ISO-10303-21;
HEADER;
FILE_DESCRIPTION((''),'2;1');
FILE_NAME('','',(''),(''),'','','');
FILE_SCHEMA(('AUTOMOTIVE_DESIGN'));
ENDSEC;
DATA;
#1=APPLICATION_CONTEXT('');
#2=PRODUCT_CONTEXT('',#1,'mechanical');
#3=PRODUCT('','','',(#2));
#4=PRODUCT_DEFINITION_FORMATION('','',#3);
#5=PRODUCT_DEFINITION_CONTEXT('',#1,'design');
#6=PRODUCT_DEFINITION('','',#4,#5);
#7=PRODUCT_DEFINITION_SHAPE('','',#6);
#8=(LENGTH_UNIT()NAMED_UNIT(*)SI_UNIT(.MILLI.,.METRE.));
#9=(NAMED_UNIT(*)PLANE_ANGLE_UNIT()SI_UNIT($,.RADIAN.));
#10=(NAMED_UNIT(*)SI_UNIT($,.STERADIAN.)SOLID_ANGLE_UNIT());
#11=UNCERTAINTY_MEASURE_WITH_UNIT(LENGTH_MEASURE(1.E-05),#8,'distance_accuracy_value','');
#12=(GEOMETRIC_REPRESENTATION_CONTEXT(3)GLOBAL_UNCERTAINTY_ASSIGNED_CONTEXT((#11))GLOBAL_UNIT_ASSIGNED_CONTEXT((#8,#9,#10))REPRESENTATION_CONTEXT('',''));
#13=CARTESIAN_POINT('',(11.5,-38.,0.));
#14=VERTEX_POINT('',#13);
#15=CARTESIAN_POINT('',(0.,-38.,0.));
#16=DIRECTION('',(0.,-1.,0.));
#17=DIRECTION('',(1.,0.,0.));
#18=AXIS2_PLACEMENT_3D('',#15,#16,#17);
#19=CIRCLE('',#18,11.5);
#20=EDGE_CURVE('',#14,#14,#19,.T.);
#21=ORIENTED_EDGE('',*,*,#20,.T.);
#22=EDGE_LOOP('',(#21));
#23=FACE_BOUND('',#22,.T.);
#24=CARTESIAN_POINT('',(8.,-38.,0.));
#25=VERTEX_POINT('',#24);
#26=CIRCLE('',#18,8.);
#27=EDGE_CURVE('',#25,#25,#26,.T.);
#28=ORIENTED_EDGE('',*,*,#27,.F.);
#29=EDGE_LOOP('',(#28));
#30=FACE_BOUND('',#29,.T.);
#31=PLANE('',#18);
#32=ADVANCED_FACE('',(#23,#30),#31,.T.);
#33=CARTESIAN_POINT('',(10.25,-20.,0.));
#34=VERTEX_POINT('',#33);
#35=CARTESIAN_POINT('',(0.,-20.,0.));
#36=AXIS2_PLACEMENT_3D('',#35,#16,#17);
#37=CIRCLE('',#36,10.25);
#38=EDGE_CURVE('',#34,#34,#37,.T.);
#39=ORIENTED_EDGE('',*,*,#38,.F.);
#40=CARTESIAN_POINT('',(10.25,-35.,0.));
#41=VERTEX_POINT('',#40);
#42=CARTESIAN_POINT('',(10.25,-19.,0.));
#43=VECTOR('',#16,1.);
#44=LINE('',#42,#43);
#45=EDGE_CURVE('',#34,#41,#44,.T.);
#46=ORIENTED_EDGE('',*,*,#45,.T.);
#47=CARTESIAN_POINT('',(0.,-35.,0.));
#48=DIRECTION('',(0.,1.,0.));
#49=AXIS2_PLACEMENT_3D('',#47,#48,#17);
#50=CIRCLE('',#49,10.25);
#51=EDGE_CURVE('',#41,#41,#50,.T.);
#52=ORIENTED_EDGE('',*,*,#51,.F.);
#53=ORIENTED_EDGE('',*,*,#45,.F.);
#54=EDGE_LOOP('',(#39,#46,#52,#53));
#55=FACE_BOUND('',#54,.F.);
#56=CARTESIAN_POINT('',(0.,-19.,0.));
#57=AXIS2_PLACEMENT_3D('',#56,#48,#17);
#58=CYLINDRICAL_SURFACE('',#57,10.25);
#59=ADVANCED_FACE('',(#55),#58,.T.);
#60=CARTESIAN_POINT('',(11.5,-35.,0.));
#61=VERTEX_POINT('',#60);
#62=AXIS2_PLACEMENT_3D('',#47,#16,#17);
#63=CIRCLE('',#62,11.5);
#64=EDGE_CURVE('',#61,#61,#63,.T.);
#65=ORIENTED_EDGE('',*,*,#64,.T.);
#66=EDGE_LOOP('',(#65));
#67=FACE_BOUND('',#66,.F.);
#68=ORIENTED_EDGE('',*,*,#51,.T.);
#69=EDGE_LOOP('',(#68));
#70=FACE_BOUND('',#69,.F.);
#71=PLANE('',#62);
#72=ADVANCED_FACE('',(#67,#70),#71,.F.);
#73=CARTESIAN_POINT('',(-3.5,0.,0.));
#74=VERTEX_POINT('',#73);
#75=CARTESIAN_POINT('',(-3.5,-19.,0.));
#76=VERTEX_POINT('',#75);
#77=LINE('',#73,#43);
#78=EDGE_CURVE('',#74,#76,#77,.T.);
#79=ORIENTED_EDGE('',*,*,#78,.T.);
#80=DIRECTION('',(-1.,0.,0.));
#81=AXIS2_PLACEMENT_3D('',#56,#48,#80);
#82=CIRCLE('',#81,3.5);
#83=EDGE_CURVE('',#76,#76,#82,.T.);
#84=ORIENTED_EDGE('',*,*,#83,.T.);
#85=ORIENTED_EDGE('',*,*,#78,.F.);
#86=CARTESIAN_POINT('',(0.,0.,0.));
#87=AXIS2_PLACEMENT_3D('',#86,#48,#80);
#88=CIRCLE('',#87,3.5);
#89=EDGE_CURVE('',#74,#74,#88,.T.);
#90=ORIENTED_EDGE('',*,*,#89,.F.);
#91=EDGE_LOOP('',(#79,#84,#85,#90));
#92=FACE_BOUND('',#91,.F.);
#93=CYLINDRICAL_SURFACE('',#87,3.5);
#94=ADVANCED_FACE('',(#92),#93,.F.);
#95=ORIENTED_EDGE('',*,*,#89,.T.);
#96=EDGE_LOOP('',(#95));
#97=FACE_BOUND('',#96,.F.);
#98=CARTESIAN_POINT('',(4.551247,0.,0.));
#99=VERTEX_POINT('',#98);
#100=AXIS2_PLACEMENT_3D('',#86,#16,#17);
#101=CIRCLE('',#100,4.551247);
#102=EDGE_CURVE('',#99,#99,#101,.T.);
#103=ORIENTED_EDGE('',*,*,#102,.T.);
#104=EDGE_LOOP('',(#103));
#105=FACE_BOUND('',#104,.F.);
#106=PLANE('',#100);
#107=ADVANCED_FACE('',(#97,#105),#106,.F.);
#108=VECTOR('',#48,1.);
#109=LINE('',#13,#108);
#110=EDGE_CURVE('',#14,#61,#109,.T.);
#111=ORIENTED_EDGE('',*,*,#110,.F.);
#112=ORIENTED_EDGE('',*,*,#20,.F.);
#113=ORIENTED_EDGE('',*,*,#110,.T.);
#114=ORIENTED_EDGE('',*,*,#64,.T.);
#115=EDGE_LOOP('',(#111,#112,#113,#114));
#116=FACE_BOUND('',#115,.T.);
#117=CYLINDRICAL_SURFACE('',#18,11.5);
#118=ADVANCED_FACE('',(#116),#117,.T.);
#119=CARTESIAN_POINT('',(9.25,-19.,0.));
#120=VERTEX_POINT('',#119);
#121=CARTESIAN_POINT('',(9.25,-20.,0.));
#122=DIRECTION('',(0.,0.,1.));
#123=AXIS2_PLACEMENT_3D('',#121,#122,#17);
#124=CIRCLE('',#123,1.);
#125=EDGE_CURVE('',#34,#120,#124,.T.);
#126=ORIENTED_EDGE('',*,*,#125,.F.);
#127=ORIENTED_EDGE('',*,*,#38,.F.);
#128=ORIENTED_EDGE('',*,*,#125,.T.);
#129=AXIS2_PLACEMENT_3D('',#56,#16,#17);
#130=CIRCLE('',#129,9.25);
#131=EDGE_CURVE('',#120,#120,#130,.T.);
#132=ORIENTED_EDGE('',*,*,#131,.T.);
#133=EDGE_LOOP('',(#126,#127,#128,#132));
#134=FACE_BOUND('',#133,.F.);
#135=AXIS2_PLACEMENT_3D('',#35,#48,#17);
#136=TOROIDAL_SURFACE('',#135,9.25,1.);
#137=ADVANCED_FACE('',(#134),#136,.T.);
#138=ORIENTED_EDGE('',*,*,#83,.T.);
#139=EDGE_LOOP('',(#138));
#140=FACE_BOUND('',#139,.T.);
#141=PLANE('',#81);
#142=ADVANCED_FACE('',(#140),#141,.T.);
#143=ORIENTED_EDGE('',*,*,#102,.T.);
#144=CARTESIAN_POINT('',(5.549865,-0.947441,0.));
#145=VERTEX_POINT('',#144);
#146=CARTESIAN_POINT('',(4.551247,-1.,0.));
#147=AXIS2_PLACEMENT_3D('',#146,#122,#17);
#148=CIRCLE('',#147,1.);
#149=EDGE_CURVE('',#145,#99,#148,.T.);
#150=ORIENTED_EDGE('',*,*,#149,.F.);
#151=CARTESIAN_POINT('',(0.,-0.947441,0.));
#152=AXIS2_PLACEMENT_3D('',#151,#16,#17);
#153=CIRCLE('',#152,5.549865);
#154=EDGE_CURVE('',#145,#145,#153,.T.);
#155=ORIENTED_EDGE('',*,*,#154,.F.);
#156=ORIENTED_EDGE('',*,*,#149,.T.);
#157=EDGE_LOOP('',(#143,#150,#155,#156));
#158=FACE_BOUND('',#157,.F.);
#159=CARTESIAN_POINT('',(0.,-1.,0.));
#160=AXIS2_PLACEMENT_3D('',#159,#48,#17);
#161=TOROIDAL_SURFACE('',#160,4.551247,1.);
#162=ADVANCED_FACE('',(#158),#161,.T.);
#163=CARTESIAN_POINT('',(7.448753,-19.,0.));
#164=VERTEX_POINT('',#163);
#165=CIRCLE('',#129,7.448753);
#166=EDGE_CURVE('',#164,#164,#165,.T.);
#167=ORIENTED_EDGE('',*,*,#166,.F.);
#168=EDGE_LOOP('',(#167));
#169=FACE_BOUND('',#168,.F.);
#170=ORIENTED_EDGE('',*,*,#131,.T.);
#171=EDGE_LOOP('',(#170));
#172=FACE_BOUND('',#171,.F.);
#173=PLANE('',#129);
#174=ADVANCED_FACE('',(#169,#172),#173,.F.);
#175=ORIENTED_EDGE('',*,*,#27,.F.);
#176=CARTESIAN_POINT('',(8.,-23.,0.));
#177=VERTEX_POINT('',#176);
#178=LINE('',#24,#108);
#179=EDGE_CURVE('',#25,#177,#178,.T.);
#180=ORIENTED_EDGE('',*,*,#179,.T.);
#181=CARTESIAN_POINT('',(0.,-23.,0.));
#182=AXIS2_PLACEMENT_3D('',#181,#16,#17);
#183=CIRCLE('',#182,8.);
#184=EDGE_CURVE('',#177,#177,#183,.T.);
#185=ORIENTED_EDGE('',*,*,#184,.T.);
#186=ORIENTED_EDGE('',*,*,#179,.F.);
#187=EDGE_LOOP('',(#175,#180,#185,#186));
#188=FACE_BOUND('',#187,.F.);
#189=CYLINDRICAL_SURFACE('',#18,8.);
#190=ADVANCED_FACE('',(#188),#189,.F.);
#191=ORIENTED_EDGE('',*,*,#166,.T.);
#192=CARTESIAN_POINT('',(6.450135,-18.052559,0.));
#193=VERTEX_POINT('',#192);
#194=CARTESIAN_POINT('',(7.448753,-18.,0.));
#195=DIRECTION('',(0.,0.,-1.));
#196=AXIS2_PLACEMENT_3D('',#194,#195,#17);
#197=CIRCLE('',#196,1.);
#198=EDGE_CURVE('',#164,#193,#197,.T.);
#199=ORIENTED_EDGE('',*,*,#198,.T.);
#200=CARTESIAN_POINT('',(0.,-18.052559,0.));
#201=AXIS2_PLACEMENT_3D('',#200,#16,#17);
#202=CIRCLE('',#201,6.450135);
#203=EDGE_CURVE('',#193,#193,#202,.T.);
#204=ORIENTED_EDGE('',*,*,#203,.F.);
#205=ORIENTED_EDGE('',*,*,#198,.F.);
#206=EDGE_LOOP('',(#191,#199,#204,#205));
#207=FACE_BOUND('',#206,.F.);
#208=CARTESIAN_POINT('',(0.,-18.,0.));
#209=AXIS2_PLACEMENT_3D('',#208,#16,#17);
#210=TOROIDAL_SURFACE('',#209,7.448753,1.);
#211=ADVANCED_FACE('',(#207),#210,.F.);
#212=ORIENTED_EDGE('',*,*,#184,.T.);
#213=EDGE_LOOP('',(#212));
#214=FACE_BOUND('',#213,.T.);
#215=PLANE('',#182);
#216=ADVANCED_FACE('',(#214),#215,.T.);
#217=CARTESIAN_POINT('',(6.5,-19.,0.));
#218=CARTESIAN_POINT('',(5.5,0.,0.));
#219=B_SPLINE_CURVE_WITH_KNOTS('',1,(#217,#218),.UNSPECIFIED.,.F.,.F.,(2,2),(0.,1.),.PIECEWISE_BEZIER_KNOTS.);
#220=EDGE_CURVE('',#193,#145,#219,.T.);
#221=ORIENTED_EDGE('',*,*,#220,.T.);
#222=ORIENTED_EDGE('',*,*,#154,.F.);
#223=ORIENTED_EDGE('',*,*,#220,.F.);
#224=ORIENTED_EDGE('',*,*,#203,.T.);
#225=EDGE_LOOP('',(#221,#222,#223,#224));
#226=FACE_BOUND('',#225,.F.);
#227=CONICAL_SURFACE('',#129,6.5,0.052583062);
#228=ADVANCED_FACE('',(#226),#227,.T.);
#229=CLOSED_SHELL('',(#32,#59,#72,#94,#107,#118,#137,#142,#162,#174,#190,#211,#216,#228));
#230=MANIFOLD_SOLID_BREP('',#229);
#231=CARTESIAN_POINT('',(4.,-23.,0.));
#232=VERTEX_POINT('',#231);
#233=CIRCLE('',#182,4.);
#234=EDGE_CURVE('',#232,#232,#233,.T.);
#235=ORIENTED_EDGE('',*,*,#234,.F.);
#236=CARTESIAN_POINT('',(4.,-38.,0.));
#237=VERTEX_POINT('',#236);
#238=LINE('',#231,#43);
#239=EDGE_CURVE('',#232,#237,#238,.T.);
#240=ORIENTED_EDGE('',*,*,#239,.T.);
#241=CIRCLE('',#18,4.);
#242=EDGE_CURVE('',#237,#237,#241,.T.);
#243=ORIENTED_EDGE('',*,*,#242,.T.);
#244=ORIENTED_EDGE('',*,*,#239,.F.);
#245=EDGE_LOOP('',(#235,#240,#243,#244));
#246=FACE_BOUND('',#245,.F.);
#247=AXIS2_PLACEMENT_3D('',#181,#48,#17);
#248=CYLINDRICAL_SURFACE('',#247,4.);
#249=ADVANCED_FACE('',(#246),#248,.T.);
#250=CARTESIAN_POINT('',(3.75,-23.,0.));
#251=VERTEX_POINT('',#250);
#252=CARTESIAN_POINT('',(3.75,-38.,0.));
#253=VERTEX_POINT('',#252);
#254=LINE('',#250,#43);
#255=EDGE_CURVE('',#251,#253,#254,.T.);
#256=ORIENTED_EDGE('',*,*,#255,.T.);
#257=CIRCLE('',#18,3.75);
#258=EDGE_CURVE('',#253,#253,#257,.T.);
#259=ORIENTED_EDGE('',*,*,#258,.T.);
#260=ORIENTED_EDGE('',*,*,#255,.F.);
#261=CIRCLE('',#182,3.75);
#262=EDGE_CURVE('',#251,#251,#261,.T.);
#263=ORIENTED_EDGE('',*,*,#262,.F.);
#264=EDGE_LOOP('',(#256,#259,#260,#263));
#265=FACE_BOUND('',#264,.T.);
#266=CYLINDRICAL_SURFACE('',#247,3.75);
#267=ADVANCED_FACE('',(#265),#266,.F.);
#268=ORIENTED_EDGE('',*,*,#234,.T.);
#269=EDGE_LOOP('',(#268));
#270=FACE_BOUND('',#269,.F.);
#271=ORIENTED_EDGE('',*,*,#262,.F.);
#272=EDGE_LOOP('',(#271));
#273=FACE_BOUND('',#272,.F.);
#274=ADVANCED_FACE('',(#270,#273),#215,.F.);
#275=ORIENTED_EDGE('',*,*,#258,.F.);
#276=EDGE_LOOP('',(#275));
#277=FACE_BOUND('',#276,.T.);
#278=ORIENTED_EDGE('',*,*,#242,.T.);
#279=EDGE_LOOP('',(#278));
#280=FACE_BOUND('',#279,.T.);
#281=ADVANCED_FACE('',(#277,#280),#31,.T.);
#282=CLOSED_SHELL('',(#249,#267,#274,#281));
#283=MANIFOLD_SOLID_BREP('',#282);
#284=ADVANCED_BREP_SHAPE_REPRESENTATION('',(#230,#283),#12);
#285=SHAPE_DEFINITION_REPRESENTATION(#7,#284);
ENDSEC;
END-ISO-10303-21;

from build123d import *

# Parameters (mm, degrees)
F2_R      = 6.5
F0_R      = 5.5
F4_R      = 10.25
F5_DEPTH  = 19
F6_R      = 11.5
F7_DEPTH  = 3
F8_R      = 3.5
F9_DEPTH  = 19
F10_R     = 8
F11_DEPTH = 15
F12_R     = 4
F12_R_2   = 3.75
F13_DEPTH = 15
F14_R     = 1


with BuildPart() as f3:
    # F2 (on offset) → F3 section 0
    with BuildSketch(Plane.XZ.offset(19)):
        Circle(F2_R)
    # F0 (on Front) → F3 section 1
    with BuildSketch(Plane.XZ):
        Circle(F0_R)
    loft()

    # F4 (on face) → F5 (join)
    with BuildSketch(Plane.XZ.offset(19)):
        Circle(F4_R)
    extrude(amount=F5_DEPTH)

    # F6 (on face) → F7 (join)
    with BuildSketch(Plane.XZ.offset(38)):
        Circle(F6_R)
    extrude(amount=-F7_DEPTH)

    # F8 (on face) → F9 (cut)
    with BuildSketch(Plane(origin=(0, 0, 0), x_dir=(-1, 0, 0), z_dir=(0, 1, 0))):
        Circle(F8_R)
    extrude(amount=-F9_DEPTH, mode=Mode.SUBTRACT)

    # F10 (on face) → F11 (cut)
    with BuildSketch(Plane.XZ.offset(38)):
        Circle(F10_R)
    extrude(amount=-F11_DEPTH, mode=Mode.SUBTRACT)

    # F14
    f14_edges = [f3.edges().sort_by_distance(p)[0] for p in [
        (-5.5, 0, 0),
        (-10.25, -19, 0),
        (-6.5, -19, 0),
    ]]
    fillet(f14_edges, radius=F14_R)


with BuildPart() as f13:
    # F12 (on face) → F13 (new body)
    with BuildSketch(Plane.XZ.offset(23)):
        Circle(F12_R)
        Circle(F12_R_2, mode=Mode.SUBTRACT)
    extrude(amount=F13_DEPTH)


solid = Compound([f3.part, f13.part])
